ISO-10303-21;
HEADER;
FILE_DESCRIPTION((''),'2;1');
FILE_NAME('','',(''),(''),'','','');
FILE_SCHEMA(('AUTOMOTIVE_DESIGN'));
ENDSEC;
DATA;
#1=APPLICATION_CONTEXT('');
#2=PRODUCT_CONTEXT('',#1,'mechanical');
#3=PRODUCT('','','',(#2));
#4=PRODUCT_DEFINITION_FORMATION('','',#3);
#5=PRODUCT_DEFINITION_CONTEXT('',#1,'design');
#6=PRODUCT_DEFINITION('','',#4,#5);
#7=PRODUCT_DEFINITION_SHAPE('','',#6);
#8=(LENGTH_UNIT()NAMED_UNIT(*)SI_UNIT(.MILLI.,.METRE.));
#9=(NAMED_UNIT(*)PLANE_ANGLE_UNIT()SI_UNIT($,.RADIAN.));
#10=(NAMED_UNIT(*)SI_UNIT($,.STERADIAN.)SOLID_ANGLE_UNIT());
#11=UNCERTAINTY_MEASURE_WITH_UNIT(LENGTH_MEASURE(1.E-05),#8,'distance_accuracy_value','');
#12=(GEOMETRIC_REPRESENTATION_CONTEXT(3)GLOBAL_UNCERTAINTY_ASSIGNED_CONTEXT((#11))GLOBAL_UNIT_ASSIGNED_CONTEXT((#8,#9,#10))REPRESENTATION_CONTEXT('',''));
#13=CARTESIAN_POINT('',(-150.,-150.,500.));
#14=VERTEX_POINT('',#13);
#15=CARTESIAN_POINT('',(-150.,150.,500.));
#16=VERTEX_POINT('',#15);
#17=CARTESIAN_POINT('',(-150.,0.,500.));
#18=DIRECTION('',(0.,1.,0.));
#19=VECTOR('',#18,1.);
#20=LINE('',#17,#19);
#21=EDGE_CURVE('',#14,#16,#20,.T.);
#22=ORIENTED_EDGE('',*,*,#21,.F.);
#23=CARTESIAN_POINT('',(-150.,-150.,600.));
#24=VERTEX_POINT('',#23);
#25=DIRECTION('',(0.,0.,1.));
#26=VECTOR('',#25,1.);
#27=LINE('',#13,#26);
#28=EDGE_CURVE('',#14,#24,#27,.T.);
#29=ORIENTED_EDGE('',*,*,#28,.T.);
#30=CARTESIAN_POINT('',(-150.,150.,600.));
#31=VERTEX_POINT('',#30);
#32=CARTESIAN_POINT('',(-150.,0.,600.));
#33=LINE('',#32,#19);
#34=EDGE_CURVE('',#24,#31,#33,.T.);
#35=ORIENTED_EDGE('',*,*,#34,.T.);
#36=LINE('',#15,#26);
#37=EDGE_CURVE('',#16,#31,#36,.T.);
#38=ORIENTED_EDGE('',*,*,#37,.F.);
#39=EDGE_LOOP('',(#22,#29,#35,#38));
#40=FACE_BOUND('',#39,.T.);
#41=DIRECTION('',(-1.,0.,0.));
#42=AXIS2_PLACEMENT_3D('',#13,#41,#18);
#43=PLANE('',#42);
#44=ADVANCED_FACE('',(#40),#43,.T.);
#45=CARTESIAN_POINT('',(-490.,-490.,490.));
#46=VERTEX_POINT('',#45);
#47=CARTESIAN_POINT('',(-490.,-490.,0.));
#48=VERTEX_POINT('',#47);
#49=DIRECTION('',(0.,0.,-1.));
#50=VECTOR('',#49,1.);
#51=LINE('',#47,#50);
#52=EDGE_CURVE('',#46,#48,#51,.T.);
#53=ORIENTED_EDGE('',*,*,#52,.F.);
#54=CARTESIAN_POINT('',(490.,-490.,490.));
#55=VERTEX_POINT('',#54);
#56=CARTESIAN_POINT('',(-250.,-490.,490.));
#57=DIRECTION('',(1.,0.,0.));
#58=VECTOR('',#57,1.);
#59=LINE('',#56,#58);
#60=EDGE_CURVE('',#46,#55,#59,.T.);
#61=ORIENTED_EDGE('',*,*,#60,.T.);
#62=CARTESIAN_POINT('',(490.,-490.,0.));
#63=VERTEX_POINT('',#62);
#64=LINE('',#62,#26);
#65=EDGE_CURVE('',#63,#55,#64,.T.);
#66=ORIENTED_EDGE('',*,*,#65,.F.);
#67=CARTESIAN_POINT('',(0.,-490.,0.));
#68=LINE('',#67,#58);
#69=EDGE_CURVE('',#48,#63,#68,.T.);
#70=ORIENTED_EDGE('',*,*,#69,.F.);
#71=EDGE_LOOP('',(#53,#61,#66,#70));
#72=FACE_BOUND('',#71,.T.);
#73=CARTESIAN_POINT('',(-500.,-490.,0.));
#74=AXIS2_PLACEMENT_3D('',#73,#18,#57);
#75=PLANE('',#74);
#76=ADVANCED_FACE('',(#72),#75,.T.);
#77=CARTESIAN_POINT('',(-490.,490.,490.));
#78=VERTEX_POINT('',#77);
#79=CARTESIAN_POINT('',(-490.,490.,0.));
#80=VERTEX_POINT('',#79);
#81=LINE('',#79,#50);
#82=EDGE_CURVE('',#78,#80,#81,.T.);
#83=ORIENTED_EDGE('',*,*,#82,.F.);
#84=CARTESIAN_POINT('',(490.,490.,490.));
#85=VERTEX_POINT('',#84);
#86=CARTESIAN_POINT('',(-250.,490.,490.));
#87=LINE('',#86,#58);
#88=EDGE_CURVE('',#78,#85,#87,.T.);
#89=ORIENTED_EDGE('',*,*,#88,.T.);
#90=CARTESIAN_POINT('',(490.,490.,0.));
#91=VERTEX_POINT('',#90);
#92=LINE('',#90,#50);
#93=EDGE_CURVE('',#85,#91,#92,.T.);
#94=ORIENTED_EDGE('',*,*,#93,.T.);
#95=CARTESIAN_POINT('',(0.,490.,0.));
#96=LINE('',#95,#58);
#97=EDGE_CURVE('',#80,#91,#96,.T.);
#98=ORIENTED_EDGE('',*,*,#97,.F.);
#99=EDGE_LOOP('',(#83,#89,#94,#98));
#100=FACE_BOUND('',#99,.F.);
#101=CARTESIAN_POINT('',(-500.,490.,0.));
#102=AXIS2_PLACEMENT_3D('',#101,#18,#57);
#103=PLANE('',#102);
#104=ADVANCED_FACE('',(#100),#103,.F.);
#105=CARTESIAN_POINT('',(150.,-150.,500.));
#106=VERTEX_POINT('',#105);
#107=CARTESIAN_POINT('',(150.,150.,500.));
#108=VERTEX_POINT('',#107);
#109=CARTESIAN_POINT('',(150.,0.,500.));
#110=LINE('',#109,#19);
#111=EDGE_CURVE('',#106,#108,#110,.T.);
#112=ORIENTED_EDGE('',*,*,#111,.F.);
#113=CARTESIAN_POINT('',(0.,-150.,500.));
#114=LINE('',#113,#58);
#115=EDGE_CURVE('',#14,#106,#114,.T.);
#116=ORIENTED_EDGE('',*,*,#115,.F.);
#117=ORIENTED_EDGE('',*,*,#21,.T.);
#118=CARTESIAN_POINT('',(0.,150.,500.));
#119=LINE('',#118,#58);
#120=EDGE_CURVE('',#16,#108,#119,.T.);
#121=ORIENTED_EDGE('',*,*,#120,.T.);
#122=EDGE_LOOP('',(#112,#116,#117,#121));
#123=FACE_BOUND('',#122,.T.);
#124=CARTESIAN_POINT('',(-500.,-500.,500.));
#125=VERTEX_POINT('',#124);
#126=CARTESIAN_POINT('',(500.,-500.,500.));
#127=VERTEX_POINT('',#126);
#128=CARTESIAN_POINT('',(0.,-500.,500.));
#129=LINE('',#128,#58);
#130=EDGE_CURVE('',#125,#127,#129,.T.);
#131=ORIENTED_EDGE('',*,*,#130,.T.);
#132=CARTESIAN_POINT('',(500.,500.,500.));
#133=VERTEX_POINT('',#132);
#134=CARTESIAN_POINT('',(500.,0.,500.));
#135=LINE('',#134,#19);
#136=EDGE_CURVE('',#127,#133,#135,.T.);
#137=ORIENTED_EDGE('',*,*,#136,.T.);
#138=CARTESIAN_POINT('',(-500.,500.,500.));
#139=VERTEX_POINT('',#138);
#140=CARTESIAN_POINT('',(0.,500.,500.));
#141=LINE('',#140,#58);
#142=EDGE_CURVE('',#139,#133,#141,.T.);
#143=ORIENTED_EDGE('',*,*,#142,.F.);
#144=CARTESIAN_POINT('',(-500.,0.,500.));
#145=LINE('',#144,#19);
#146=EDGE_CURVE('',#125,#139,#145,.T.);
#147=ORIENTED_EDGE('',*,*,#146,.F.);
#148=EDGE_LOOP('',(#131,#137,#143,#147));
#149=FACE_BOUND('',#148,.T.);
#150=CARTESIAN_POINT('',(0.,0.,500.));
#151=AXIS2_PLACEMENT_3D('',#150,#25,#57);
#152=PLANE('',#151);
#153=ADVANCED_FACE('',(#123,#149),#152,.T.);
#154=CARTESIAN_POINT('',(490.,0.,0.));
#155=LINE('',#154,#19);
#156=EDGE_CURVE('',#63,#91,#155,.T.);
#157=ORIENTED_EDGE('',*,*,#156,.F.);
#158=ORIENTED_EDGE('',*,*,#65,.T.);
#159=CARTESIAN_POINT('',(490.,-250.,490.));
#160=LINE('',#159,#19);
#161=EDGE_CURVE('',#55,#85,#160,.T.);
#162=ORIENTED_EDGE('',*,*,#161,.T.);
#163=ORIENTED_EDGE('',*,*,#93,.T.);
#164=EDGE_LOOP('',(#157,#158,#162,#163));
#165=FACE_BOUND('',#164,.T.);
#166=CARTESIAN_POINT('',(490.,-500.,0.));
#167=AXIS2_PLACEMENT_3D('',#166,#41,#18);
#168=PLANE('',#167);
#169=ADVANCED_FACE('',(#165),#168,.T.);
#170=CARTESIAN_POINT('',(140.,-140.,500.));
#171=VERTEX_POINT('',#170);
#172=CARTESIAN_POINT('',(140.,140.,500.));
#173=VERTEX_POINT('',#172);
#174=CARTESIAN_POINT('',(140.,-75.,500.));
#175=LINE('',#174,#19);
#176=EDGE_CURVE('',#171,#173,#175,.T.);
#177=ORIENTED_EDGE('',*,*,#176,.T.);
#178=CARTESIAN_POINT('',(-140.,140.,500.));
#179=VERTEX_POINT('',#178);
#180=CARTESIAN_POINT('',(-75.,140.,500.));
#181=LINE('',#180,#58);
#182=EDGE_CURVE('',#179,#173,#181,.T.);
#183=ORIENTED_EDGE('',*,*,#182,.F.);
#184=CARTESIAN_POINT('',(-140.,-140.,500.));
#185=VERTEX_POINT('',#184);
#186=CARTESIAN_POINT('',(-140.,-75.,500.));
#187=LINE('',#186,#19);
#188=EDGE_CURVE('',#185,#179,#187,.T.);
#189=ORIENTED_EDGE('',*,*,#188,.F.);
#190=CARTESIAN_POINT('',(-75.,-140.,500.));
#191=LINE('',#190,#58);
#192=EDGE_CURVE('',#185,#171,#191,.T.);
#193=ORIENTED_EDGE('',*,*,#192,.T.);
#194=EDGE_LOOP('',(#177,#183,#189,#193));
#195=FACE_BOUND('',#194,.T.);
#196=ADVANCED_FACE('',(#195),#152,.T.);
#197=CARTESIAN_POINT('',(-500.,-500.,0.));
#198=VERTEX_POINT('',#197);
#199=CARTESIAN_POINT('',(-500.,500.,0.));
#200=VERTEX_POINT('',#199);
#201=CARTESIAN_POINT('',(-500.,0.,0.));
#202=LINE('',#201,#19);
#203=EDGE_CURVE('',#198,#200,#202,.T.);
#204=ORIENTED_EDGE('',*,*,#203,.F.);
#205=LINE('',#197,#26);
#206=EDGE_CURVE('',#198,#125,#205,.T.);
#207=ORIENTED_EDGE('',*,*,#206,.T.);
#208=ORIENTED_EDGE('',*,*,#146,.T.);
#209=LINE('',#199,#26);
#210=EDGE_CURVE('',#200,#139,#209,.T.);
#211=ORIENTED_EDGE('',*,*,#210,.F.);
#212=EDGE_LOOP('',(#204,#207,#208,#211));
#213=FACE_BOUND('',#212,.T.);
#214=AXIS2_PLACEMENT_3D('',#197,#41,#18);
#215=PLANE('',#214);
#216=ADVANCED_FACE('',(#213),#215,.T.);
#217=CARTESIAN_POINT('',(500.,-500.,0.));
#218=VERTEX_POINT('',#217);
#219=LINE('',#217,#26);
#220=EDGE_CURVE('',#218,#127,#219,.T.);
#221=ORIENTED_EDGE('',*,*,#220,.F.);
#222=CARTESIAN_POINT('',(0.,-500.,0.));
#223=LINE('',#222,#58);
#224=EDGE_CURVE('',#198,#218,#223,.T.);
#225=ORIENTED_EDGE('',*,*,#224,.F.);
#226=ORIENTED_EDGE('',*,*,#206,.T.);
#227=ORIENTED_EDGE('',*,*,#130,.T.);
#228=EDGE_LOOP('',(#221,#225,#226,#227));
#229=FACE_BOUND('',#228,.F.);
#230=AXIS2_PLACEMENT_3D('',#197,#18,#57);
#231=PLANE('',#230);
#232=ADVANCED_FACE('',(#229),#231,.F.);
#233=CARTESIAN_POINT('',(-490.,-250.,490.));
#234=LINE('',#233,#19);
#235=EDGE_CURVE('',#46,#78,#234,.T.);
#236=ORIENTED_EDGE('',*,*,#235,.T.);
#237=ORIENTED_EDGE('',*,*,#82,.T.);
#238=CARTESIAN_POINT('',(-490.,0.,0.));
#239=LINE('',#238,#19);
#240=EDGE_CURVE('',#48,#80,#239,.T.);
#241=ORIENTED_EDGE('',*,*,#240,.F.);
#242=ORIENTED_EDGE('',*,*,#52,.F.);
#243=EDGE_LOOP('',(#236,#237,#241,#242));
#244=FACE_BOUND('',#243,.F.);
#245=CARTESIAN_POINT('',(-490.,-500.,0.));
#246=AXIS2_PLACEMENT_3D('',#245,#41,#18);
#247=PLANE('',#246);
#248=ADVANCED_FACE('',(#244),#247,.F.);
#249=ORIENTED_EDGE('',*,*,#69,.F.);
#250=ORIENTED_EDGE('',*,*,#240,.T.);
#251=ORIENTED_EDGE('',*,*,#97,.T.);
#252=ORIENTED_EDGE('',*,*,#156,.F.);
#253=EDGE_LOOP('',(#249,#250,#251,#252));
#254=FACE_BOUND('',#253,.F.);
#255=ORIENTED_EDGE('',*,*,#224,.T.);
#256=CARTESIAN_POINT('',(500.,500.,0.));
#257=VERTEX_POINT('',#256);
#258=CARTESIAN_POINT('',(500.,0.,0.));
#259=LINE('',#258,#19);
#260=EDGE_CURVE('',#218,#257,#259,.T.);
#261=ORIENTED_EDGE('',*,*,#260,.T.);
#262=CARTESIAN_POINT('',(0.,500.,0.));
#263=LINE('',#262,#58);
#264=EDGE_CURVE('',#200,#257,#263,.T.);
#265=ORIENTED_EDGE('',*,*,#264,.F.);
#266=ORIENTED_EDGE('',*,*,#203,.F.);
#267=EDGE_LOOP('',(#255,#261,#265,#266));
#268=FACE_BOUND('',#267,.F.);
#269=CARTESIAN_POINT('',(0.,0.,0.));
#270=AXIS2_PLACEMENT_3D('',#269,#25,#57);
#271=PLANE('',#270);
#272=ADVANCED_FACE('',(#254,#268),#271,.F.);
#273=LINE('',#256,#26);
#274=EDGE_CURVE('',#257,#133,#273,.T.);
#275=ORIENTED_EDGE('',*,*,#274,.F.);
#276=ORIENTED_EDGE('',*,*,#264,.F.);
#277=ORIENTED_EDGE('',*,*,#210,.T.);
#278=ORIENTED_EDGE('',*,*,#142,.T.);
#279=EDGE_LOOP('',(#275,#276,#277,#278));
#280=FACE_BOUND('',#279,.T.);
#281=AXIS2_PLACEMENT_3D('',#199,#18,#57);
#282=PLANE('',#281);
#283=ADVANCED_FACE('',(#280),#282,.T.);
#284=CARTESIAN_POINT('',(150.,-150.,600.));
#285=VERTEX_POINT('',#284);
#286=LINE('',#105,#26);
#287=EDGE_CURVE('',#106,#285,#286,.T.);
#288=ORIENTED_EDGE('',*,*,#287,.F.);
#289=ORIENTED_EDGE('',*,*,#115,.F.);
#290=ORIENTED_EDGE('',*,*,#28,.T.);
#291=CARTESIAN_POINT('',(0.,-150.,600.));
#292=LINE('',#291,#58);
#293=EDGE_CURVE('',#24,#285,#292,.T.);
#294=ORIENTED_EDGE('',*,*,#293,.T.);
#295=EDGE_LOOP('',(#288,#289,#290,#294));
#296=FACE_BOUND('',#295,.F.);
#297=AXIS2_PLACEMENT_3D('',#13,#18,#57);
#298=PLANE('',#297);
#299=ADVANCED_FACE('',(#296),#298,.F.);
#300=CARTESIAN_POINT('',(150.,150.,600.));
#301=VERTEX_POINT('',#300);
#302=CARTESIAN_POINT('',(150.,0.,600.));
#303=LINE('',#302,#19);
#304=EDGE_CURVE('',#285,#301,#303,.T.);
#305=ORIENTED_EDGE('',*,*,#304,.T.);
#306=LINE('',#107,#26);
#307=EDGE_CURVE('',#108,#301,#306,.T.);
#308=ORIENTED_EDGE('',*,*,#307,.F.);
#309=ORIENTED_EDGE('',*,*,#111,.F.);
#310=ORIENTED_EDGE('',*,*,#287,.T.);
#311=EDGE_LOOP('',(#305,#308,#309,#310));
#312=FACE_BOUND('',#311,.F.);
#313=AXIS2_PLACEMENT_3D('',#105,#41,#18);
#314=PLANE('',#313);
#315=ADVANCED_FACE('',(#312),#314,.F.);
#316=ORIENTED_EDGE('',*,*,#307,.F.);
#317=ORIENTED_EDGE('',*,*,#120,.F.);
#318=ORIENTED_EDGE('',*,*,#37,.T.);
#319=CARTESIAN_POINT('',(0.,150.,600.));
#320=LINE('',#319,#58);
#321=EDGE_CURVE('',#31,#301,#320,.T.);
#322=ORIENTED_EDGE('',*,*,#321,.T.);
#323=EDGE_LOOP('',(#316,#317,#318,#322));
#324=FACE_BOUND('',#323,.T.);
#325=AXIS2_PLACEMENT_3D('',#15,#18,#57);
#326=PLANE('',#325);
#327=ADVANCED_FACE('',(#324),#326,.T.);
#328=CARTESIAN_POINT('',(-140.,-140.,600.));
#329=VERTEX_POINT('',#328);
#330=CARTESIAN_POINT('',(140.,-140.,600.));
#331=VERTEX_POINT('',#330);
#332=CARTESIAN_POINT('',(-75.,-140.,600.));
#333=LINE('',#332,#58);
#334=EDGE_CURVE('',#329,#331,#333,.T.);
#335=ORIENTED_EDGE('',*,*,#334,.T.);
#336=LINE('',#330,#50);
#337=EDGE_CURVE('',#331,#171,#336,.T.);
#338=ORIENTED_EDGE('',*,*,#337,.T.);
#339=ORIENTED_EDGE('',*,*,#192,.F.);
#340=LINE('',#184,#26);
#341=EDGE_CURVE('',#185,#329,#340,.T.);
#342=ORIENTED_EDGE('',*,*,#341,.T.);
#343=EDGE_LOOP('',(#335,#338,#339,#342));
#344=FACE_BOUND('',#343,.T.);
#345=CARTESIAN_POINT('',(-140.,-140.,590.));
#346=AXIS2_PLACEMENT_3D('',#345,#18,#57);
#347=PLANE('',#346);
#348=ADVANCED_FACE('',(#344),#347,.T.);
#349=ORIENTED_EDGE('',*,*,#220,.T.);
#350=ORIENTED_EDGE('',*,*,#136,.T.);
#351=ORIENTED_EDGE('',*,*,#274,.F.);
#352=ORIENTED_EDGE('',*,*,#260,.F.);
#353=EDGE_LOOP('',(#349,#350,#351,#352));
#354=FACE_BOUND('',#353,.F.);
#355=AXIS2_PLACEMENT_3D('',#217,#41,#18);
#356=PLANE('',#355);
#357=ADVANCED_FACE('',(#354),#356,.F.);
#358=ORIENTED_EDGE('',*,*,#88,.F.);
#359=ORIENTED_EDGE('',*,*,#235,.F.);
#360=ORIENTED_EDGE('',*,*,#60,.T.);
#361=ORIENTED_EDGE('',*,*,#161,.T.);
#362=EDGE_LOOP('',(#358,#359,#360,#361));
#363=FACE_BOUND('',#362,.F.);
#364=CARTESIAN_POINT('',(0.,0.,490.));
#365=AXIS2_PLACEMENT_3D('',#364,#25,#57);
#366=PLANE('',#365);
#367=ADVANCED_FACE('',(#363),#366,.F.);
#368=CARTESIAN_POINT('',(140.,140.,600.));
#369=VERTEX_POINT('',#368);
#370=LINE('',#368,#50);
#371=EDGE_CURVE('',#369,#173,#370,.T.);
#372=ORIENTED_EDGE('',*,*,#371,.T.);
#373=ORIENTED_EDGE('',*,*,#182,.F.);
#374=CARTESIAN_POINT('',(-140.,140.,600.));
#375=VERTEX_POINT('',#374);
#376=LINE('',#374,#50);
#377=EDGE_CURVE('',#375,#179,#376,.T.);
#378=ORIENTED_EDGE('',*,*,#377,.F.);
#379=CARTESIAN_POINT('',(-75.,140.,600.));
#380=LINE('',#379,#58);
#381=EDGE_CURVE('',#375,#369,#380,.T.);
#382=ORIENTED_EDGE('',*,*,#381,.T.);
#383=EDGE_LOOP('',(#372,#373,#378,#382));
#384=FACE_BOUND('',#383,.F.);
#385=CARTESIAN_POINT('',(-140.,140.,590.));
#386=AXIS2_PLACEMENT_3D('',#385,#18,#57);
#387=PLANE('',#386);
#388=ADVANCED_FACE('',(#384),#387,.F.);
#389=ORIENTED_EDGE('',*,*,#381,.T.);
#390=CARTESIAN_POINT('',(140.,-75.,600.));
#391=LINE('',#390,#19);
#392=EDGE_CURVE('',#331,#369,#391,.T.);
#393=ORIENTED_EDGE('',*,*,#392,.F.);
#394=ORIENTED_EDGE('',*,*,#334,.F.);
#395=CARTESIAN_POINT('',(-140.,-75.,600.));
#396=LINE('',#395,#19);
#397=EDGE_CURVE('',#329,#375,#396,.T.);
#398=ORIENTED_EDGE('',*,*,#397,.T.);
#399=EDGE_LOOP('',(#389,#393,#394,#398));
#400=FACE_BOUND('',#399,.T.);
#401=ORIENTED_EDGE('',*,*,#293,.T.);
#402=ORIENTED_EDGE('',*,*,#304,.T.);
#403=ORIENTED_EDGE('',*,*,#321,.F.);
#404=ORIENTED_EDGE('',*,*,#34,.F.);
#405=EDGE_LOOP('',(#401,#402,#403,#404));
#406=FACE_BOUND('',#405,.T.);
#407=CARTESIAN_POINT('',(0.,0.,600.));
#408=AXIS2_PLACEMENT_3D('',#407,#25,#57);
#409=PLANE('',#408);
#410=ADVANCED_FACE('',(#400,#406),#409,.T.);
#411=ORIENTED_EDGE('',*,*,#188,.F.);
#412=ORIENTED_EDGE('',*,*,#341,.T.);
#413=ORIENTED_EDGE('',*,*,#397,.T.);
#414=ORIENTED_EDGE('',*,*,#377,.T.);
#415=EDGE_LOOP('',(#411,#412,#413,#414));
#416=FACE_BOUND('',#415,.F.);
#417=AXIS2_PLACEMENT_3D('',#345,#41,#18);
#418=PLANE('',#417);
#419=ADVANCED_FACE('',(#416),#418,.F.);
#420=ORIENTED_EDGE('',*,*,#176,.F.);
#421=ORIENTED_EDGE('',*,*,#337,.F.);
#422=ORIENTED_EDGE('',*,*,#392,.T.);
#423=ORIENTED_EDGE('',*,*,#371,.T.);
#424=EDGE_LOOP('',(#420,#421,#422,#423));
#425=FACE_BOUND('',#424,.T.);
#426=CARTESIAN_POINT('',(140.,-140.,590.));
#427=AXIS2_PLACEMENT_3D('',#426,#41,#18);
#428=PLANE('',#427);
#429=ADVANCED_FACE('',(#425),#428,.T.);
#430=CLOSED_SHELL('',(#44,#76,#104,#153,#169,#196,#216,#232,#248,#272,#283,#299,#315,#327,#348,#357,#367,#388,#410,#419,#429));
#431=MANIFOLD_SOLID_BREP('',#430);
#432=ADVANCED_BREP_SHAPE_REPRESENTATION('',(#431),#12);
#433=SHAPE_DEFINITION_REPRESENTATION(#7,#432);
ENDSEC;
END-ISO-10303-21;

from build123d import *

# Parameters (mm, degrees)
F0_W     = 1000
F0_H     = 1000
F1_DEPTH = 500
F3_T     = -10
F2_W     = 300
F2_H     = 300
F4_DEPTH = 100
F5_T     = -10


# Not quite as in the source:
# - a shell that OpenCascade refuses in one call is made with other operations: the cavity is built on its own and cut out


with BuildPart() as f1:
    # F0 (on Top) → F1 (new body)
    with BuildSketch(Plane.XY):
        Rectangle(F0_W, F0_H)
    extrude(amount=F1_DEPTH)

    # F3
    f3_openings = [f1.faces().sort_by_distance(p)[0] for p in [
        (0, 0, 0),
    ]]
    offset(amount=F3_T, openings=f3_openings)

    # F2 (on face) → F4 (join)
    with BuildSketch(Plane.XY.offset(500)):
        Rectangle(F2_W, F2_H)
    extrude(amount=F4_DEPTH)

    # F5: a shell. OpenCascade refuses it in one call, so the cavity is built on its own and cut out:
    # the body offset inwards by the wall thickness, plus a prism from it out through each open face.
    f5_core = offset(f1.part, amount=F5_T, kind=Kind.INTERSECTION, mode=Mode.PRIVATE)
    f5_exits = [f5_core.faces().sort_by_distance(p)[0] for p in [
        (0, 0, 590),
    ]]
    add(f5_core, mode=Mode.SUBTRACT)
    extrude(f5_exits, amount=-F5_T, mode=Mode.SUBTRACT)


solid = f1.part
